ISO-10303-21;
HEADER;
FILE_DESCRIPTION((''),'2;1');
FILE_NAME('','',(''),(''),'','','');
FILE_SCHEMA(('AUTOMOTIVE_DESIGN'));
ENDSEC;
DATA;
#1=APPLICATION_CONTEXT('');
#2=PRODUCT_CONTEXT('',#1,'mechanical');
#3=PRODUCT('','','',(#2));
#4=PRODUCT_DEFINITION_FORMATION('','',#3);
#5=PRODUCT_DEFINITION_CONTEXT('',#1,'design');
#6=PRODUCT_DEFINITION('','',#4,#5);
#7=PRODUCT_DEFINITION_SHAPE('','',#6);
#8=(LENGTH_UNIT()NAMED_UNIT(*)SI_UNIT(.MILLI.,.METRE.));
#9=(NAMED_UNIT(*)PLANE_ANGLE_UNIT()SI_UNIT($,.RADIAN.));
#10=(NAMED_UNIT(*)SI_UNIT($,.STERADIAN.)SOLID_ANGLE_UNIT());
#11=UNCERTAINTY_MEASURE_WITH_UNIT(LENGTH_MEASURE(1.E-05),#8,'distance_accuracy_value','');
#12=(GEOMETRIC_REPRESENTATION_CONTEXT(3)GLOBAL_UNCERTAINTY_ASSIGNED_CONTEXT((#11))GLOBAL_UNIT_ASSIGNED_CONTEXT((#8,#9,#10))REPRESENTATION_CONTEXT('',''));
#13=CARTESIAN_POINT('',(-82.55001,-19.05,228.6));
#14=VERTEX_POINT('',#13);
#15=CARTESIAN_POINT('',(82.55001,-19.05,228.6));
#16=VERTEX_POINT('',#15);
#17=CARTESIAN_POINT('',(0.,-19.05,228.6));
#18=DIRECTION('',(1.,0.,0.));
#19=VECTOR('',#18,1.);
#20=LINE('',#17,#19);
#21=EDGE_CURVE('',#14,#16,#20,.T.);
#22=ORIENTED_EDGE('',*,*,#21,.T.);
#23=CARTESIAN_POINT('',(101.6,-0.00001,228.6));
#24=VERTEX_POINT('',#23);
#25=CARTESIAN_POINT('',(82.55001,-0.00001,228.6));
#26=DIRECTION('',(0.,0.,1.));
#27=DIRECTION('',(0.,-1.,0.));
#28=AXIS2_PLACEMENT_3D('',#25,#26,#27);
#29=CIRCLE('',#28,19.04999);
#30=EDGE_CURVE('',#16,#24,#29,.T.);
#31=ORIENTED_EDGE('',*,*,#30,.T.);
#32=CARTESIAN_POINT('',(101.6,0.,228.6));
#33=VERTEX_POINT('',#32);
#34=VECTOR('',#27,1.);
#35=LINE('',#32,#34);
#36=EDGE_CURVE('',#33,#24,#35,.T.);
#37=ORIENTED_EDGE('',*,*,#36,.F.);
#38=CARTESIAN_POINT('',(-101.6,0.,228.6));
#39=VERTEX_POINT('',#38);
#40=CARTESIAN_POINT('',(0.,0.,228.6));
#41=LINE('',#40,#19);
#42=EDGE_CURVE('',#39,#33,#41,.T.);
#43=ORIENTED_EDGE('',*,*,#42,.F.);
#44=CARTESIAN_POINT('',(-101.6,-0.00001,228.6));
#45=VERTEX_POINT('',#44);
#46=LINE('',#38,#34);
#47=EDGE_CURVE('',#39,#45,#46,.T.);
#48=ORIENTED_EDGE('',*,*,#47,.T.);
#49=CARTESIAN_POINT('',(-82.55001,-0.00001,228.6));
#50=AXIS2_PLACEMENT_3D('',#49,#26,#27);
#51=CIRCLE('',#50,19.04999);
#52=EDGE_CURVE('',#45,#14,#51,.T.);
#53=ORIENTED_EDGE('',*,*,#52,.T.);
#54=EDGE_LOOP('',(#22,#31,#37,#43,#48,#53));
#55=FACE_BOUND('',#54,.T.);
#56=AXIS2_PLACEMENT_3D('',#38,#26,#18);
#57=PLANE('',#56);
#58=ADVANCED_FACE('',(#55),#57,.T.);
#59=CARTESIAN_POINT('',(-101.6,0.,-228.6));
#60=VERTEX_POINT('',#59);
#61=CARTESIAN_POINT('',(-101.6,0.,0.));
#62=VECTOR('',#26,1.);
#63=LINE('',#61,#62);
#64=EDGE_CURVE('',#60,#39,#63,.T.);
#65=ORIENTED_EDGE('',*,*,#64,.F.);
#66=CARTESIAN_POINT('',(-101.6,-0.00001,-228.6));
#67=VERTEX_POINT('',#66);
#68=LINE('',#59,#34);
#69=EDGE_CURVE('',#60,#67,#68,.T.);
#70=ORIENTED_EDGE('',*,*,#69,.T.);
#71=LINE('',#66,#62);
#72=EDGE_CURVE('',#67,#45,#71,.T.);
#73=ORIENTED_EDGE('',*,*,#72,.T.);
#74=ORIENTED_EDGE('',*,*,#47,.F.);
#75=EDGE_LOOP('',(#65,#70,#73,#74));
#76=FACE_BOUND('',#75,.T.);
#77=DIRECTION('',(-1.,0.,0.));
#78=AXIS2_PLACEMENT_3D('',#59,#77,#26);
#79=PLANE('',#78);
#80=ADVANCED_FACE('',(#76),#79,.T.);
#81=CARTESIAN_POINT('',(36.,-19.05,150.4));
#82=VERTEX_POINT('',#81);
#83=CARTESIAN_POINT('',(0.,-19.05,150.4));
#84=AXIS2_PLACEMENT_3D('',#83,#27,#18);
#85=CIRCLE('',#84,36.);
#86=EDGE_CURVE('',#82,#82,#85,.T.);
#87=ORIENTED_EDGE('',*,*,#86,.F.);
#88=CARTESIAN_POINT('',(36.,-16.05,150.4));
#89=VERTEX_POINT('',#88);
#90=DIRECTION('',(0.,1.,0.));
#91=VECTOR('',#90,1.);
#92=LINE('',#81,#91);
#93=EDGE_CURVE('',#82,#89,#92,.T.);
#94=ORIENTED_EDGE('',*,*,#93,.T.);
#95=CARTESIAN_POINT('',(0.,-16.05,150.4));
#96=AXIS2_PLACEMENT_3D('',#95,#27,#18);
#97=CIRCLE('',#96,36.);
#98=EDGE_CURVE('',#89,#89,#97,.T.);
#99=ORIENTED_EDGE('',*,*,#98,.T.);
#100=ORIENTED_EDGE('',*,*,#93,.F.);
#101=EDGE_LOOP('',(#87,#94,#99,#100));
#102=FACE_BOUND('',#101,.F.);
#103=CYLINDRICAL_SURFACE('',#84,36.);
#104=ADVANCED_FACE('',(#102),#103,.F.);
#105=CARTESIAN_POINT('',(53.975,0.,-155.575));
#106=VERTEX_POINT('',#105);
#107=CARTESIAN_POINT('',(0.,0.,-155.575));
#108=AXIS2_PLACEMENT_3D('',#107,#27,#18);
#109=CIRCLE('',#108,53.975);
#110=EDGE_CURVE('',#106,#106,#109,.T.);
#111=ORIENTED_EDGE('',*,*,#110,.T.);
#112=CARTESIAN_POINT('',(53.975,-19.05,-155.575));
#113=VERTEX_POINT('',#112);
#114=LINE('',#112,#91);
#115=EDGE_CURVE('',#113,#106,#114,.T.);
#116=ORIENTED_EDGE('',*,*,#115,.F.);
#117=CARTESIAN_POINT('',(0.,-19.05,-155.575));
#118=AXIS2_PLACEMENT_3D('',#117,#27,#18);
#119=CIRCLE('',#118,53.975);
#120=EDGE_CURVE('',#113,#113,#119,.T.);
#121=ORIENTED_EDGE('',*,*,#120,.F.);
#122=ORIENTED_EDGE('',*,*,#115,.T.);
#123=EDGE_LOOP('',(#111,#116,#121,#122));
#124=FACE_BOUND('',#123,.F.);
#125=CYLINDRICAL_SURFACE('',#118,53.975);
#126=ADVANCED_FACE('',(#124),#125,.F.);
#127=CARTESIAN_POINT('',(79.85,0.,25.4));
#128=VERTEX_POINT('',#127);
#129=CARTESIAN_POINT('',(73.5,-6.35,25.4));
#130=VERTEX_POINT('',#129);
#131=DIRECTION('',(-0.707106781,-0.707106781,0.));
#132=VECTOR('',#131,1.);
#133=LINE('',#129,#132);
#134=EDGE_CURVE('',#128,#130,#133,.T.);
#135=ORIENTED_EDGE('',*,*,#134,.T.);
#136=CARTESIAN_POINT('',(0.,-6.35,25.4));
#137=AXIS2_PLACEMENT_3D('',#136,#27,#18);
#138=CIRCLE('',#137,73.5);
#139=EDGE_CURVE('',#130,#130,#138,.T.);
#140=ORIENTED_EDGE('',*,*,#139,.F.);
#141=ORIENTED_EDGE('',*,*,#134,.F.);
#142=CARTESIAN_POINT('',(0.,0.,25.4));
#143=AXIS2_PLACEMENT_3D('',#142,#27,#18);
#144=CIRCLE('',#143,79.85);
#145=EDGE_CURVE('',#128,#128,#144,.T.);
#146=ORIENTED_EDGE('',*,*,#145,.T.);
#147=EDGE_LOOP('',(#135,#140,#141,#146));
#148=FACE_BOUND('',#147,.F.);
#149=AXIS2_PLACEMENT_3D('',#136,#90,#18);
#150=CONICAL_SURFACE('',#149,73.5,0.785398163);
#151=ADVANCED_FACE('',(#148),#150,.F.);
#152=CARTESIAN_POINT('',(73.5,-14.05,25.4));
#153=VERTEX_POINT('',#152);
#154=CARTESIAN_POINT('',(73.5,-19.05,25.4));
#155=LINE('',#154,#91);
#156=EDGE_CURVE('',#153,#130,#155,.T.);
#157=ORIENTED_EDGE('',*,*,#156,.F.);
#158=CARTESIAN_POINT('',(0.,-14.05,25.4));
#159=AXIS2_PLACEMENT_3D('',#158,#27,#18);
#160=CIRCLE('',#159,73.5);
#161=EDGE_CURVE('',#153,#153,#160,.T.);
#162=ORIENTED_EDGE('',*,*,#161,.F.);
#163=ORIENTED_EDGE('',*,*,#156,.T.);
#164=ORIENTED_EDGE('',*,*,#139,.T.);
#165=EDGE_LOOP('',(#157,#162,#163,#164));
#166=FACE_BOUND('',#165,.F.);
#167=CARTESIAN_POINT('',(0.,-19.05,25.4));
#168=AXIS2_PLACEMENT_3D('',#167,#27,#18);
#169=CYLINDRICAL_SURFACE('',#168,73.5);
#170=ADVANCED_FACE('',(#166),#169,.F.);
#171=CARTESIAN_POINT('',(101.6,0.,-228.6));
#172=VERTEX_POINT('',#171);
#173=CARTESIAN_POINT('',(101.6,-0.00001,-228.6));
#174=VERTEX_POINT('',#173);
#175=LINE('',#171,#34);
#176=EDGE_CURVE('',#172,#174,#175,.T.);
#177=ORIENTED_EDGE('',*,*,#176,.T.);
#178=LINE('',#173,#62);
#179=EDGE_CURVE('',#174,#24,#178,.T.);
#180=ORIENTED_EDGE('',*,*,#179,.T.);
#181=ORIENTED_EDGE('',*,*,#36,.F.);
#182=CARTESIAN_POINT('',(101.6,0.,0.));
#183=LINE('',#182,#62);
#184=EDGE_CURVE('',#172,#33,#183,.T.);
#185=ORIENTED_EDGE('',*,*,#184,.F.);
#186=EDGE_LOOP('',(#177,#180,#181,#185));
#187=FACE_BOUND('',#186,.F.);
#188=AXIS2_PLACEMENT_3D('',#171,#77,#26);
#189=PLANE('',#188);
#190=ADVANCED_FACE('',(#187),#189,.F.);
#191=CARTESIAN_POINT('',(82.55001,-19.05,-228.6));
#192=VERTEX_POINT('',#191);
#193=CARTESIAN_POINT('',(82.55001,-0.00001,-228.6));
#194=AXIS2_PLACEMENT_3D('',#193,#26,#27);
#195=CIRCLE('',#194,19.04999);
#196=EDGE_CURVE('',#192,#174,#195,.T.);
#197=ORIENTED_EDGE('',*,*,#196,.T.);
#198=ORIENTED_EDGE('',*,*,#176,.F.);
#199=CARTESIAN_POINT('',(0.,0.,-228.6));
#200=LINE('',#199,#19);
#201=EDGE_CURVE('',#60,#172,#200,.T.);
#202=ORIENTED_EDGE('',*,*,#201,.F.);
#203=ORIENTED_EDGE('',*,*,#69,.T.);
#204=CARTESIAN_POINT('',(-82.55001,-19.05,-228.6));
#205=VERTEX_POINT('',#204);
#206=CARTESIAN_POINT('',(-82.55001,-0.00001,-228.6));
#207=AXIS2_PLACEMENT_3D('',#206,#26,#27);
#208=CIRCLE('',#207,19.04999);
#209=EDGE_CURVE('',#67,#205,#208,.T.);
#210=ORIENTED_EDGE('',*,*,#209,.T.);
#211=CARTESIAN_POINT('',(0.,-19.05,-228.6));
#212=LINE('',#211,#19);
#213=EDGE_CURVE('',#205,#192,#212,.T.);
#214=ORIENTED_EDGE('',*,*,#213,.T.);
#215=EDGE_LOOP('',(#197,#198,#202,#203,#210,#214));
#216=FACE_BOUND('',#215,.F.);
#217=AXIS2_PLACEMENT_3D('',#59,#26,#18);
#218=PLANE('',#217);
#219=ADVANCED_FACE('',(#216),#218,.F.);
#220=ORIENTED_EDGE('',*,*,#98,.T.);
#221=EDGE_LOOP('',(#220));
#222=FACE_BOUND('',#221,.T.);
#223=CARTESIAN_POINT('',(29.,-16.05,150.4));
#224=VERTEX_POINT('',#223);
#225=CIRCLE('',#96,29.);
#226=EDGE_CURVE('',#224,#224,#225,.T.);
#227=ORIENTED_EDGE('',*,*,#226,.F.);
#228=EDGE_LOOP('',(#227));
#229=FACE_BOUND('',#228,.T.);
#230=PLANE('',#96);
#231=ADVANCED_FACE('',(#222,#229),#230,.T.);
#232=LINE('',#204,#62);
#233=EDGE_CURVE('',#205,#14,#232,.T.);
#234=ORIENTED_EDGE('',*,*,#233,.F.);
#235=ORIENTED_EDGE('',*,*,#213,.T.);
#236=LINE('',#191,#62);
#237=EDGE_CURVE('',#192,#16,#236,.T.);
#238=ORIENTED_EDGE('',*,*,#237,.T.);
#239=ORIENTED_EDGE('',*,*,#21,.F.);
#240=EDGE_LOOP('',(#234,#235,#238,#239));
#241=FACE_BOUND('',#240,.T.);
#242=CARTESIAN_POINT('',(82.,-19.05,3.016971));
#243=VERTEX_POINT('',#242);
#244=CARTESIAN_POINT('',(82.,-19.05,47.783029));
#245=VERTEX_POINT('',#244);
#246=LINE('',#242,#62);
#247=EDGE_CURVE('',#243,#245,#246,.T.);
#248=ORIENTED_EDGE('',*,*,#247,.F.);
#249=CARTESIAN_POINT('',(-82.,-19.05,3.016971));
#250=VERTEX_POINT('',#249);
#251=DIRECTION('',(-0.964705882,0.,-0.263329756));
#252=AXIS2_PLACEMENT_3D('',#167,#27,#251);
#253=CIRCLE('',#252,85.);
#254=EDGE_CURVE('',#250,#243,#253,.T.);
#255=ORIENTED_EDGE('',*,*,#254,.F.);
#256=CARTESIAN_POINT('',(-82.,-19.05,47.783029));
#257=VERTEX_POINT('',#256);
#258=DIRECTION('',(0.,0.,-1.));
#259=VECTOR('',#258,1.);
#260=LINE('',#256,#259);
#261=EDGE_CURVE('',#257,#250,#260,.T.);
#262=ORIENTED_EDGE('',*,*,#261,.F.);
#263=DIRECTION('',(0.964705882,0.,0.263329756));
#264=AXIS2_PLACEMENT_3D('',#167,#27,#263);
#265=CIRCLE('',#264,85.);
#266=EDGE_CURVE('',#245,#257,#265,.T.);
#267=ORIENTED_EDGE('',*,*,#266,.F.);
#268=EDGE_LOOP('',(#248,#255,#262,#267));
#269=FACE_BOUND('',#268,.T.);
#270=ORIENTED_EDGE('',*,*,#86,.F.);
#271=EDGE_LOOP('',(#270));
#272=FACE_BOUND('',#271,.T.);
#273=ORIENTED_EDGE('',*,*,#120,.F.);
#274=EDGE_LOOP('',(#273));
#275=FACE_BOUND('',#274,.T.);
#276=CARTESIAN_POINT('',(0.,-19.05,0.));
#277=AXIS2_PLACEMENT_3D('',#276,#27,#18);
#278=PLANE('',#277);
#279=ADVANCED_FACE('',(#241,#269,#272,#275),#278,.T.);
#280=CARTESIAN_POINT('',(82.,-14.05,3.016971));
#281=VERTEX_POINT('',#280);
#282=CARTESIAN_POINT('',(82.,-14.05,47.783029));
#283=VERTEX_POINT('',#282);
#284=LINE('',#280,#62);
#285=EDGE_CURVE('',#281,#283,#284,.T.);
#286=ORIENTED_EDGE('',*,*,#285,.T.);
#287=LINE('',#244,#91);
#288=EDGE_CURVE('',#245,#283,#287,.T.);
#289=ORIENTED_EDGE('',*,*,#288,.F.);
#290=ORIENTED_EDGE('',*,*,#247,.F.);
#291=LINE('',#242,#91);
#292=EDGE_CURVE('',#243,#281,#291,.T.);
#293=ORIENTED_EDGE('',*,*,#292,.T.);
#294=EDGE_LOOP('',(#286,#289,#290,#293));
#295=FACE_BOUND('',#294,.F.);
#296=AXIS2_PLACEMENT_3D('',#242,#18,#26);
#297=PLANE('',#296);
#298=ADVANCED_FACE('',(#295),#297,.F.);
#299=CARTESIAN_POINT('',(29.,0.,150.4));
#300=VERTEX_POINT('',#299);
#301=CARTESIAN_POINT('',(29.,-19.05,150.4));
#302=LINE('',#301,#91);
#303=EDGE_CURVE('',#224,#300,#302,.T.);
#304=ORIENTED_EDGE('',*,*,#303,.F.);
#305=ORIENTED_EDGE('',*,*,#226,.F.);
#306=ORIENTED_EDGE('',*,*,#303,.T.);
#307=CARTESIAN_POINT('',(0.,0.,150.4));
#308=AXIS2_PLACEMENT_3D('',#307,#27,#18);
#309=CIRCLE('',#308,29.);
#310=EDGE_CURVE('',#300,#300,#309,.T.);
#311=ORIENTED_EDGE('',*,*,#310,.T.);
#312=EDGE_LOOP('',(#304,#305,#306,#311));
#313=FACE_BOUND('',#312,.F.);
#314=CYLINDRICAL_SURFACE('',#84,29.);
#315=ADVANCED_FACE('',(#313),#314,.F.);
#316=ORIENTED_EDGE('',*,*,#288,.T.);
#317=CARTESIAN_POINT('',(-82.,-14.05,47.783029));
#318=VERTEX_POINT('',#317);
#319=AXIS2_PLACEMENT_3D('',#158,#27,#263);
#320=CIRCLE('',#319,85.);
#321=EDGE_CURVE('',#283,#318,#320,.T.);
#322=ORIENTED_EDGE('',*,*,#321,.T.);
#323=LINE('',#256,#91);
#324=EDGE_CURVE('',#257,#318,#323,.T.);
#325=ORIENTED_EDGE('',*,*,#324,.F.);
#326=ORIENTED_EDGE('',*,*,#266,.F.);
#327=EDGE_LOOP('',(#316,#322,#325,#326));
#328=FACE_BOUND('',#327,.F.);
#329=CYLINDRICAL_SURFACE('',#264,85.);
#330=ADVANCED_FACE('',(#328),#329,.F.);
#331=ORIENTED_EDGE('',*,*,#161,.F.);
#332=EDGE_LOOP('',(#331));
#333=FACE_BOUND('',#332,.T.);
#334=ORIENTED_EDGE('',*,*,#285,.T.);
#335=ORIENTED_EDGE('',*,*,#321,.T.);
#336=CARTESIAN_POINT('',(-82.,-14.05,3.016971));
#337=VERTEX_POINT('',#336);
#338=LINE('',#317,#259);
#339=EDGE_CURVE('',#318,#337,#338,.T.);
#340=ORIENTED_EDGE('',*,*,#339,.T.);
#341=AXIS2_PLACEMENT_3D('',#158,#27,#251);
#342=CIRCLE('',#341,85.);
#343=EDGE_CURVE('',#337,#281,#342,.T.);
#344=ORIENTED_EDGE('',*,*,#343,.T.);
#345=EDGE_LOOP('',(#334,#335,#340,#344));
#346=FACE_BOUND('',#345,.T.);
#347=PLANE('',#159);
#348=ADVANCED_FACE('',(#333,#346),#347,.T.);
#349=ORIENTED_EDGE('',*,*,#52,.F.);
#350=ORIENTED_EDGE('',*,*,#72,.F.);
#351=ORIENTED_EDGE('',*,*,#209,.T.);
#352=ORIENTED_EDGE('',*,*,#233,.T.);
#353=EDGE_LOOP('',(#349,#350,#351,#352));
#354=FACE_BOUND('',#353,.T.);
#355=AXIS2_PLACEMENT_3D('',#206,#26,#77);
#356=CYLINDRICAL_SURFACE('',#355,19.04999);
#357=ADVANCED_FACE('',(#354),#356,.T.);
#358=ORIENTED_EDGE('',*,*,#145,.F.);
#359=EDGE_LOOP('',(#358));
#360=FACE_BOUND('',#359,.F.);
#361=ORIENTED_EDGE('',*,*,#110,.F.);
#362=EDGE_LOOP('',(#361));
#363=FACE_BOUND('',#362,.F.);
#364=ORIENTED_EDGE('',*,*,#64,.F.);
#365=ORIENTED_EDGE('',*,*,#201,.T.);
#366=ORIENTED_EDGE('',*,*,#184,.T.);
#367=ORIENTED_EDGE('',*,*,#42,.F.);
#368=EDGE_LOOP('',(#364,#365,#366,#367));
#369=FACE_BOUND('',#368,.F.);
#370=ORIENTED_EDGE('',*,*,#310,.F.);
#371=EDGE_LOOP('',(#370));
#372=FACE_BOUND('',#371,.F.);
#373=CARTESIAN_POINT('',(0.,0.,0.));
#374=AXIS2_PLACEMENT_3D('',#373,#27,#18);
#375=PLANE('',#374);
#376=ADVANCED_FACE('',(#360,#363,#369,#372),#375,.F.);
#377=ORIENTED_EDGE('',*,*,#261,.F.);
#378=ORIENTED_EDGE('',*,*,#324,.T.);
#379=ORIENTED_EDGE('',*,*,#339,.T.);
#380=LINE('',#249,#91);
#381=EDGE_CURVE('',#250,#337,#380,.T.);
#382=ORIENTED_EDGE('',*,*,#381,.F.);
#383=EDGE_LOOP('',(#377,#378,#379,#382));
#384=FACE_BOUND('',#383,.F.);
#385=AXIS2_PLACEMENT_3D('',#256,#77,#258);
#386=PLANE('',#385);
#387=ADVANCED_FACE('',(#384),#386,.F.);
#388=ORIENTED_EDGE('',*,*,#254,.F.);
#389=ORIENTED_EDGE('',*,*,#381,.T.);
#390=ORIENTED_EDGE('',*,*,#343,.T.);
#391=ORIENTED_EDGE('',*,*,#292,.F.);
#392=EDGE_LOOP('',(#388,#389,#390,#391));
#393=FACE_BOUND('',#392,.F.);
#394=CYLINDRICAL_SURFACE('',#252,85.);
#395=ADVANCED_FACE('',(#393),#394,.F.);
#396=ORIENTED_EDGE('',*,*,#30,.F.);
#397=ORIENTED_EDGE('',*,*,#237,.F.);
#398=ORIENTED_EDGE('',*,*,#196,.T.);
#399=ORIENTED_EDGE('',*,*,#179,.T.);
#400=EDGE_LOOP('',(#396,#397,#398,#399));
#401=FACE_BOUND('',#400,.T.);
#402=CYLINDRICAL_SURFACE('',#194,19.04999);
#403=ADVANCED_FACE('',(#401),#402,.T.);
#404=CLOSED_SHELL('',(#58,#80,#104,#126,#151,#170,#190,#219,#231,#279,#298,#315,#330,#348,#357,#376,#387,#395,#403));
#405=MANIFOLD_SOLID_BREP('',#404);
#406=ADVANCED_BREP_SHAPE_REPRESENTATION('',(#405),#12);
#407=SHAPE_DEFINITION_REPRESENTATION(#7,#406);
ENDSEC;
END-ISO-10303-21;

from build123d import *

# Parameters (mm, degrees)
F0_W      = 203.2
F0_H      = 457.2
F1_DEPTH  = 19.05
F2_R      = 19.04999
F3_R      = 19.04999
F5_DEPTH  = 5
F6_R      = 73.5
F7_DEPTH  = 25.4
F8_SIZE   = 6.35
F9_R      = 36
F10_DEPTH = 3
F11_R     = 29
F12_DEPTH = 25.4
F13_R     = 53.975
F14_DEPTH = 25.4


# Not quite as in the source:
# - a fillet or chamfer is up to 0.001 mm smaller than in the source, because OpenCascade refuses the exact size


with BuildPart() as f1:
    # F0 (on Front) → F1 (new body)
    with BuildSketch(Plane.XZ):
        Rectangle(F0_W, F0_H)
    extrude(amount=F1_DEPTH)

    # F2 (radius 19.05 in the source; OpenCascade refuses exactly that, so slightly less here)
    f2_edges = [f1.edges().sort_by_distance(p)[0] for p in [
        (-101.6, -19.05, 0),
    ]]
    fillet(f2_edges, radius=F2_R)

    # F3 (radius 19.05 in the source; OpenCascade refuses exactly that, so slightly less here)
    f3_edges = [f1.edges().sort_by_distance(p)[0] for p in [
        (101.6, -19.05, 0),
    ]]
    fillet(f3_edges, radius=F3_R)

    # F4 (on face) → F5 (cut)
    with BuildSketch(Plane.XZ.offset(19.05)):
        with BuildLine():
            Line((82, 3.0169707144), (82, 47.7830292856))
            ThreePointArc((82, 47.7830292856), (0, 110.4), (-82, 47.7830292856))
            Line((-82, 47.7830292856), (-82, 3.0169707144))
            ThreePointArc((-82, 3.0169707144), (0, -59.6), (82, 3.0169707144))
        make_face()
    extrude(amount=-F5_DEPTH, mode=Mode.SUBTRACT)

    # F6 (on face) → F7 (cut)
    with BuildSketch(Plane.XZ.offset(19.05)):
        with Locations((0, 25.4)):
            Circle(F6_R)
    extrude(amount=-F7_DEPTH, mode=Mode.SUBTRACT)

    # F8
    f8_edges = [f1.edges().sort_by_distance(p)[0] for p in [
        (-73.5, 0, 25.4),
    ]]
    chamfer(f8_edges, length=F8_SIZE)

    # F9 (on face) → F10 (cut)
    with BuildSketch(Plane.XZ.offset(19.05)):
        with Locations((0, 150.4)):
            Circle(F9_R)
    extrude(amount=-F10_DEPTH, mode=Mode.SUBTRACT)

    # F11 (on face) → F12 (cut)
    with BuildSketch(Plane.XZ.offset(19.05)):
        with Locations((0, 150.4)):
            Circle(F11_R)
    extrude(amount=-F12_DEPTH, mode=Mode.SUBTRACT)

    # F13 (on face) → F14 (cut)
    with BuildSketch(Plane.XZ.offset(19.05)):
        with Locations((0, -155.575)):
            Circle(F13_R)
    extrude(amount=-F14_DEPTH, mode=Mode.SUBTRACT)


solid = f1.part
